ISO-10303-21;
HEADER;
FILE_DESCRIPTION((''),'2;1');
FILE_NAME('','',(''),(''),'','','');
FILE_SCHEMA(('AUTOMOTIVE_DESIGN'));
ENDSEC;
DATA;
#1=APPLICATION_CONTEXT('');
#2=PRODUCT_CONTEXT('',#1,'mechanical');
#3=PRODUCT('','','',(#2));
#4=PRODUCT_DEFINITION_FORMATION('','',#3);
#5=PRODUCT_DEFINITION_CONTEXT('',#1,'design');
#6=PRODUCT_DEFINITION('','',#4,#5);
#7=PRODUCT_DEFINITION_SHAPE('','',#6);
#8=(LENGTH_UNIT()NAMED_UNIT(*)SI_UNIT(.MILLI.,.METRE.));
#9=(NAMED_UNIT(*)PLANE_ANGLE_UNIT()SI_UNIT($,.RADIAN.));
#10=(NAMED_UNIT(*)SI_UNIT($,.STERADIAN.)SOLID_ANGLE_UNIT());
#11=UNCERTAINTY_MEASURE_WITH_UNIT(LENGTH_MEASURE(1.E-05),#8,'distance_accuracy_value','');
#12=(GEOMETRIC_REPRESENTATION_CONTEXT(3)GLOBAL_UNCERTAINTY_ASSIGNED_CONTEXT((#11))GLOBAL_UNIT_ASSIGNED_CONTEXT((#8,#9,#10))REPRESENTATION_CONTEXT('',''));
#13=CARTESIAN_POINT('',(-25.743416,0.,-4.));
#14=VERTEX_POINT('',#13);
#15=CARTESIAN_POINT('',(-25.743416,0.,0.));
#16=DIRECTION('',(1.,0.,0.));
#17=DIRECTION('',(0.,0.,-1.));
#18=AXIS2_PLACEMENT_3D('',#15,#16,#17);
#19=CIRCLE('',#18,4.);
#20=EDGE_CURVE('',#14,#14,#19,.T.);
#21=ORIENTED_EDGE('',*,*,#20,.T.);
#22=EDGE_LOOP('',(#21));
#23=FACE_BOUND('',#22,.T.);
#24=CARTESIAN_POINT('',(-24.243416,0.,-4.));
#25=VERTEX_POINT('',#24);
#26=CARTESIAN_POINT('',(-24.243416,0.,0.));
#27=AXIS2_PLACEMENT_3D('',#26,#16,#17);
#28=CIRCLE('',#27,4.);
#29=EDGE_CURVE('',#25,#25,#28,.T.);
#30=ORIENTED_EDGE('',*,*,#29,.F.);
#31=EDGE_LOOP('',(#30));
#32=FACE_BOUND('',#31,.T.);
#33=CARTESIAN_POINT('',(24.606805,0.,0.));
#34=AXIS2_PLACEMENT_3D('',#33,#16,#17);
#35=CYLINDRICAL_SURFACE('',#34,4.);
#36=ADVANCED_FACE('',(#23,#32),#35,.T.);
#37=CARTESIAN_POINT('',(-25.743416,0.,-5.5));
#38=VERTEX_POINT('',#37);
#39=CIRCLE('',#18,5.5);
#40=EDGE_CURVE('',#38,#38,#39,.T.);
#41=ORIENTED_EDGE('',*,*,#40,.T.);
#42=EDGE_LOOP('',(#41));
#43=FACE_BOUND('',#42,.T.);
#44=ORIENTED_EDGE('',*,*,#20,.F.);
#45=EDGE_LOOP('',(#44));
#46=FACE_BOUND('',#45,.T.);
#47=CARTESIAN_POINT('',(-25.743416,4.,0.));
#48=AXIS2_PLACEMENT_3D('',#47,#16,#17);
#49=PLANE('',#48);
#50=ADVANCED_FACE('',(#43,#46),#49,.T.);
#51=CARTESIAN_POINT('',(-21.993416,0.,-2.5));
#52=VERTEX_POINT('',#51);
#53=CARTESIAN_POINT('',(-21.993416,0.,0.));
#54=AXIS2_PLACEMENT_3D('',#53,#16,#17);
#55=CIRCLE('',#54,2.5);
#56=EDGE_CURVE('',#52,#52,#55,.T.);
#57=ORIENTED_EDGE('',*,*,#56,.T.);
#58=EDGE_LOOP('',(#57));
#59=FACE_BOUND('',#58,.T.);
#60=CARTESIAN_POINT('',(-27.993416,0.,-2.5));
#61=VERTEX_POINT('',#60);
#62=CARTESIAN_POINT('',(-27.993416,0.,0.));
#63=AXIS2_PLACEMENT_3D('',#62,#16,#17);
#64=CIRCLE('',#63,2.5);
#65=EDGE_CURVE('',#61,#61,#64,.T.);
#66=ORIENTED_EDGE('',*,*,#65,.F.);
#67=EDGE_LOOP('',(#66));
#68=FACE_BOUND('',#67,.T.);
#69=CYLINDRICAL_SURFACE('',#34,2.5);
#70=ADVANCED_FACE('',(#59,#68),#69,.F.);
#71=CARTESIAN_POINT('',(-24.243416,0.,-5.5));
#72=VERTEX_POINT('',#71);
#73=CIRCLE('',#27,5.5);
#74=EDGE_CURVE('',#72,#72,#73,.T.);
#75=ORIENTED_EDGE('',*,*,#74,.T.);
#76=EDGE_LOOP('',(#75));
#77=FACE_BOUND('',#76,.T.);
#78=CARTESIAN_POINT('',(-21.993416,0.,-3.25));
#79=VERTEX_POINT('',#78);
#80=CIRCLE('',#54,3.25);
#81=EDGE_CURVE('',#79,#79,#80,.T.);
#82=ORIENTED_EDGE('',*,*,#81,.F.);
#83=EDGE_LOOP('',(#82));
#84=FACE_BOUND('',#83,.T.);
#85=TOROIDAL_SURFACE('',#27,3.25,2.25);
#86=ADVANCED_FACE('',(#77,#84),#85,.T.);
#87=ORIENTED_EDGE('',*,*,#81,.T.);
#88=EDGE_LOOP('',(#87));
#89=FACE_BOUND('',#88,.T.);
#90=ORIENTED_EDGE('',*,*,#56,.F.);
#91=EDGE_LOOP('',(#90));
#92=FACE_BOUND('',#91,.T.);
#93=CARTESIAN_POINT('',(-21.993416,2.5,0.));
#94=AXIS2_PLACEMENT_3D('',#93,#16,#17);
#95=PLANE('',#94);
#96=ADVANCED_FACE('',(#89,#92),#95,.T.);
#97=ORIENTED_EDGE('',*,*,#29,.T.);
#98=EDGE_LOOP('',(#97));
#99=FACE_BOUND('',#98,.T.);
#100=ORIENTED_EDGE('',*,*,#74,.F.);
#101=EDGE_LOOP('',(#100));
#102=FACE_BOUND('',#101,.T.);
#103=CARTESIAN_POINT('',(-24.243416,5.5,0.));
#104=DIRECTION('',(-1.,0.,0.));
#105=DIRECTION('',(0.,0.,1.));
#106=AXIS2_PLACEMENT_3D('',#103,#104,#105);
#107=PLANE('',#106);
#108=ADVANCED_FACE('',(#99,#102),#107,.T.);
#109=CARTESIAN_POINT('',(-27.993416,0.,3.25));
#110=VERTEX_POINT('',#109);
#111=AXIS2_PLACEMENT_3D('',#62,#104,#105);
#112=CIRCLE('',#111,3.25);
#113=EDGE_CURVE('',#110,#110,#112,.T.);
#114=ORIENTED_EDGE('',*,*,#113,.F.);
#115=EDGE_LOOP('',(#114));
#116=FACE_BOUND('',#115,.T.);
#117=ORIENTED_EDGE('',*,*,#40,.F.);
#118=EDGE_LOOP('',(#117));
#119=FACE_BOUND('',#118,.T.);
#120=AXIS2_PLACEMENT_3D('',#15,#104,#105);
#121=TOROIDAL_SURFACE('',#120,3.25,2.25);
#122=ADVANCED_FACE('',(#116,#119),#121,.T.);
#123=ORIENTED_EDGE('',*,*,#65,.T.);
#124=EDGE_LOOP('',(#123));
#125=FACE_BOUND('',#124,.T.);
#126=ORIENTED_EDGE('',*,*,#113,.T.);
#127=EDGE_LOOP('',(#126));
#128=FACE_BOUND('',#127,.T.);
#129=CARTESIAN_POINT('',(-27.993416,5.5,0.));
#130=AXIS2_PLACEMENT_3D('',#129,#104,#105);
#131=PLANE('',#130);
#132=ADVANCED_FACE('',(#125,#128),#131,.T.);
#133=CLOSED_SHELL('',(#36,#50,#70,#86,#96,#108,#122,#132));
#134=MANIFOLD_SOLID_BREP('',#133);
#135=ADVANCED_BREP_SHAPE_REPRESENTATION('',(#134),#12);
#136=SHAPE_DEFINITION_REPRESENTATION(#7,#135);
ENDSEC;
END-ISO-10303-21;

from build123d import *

# Parameters (mm, degrees)
CONG_1_R = 2.25


with BuildPart() as part:
    # Esquisse1 → Révolution1 (revolve)
    with BuildSketch(Plane.XY, mode=Mode.PRIVATE) as r_volution1_sk:
        Polygon((-27.993416317, 2.5), (-21.993416317, 2.5), (-21.993416317, 5.5), (-24.243416317, 5.5), (-24.243416317, 4), (-25.743416317, 4), (-25.743416317, 5.5), (-27.993416317, 5.5), align=None)
    revolve(r_volution1_sk.sketch.rotate(Axis((24.606805167, 0, 0), (-1, 0, 0)), 90), axis=Axis((24.606805167, 0, 0), (-1, 0, 0)))

    # Congé1
    cong_1_edges = [part.edges().sort_by_distance(p)[0] for p in [
        (-27.993416317, 0, 5.5),
        (-21.993416317, 0, 5.5),
    ]]
    fillet(cong_1_edges, radius=CONG_1_R - 0.0001)  # a hair under: the kernel refuses the full size


solid = part.part
